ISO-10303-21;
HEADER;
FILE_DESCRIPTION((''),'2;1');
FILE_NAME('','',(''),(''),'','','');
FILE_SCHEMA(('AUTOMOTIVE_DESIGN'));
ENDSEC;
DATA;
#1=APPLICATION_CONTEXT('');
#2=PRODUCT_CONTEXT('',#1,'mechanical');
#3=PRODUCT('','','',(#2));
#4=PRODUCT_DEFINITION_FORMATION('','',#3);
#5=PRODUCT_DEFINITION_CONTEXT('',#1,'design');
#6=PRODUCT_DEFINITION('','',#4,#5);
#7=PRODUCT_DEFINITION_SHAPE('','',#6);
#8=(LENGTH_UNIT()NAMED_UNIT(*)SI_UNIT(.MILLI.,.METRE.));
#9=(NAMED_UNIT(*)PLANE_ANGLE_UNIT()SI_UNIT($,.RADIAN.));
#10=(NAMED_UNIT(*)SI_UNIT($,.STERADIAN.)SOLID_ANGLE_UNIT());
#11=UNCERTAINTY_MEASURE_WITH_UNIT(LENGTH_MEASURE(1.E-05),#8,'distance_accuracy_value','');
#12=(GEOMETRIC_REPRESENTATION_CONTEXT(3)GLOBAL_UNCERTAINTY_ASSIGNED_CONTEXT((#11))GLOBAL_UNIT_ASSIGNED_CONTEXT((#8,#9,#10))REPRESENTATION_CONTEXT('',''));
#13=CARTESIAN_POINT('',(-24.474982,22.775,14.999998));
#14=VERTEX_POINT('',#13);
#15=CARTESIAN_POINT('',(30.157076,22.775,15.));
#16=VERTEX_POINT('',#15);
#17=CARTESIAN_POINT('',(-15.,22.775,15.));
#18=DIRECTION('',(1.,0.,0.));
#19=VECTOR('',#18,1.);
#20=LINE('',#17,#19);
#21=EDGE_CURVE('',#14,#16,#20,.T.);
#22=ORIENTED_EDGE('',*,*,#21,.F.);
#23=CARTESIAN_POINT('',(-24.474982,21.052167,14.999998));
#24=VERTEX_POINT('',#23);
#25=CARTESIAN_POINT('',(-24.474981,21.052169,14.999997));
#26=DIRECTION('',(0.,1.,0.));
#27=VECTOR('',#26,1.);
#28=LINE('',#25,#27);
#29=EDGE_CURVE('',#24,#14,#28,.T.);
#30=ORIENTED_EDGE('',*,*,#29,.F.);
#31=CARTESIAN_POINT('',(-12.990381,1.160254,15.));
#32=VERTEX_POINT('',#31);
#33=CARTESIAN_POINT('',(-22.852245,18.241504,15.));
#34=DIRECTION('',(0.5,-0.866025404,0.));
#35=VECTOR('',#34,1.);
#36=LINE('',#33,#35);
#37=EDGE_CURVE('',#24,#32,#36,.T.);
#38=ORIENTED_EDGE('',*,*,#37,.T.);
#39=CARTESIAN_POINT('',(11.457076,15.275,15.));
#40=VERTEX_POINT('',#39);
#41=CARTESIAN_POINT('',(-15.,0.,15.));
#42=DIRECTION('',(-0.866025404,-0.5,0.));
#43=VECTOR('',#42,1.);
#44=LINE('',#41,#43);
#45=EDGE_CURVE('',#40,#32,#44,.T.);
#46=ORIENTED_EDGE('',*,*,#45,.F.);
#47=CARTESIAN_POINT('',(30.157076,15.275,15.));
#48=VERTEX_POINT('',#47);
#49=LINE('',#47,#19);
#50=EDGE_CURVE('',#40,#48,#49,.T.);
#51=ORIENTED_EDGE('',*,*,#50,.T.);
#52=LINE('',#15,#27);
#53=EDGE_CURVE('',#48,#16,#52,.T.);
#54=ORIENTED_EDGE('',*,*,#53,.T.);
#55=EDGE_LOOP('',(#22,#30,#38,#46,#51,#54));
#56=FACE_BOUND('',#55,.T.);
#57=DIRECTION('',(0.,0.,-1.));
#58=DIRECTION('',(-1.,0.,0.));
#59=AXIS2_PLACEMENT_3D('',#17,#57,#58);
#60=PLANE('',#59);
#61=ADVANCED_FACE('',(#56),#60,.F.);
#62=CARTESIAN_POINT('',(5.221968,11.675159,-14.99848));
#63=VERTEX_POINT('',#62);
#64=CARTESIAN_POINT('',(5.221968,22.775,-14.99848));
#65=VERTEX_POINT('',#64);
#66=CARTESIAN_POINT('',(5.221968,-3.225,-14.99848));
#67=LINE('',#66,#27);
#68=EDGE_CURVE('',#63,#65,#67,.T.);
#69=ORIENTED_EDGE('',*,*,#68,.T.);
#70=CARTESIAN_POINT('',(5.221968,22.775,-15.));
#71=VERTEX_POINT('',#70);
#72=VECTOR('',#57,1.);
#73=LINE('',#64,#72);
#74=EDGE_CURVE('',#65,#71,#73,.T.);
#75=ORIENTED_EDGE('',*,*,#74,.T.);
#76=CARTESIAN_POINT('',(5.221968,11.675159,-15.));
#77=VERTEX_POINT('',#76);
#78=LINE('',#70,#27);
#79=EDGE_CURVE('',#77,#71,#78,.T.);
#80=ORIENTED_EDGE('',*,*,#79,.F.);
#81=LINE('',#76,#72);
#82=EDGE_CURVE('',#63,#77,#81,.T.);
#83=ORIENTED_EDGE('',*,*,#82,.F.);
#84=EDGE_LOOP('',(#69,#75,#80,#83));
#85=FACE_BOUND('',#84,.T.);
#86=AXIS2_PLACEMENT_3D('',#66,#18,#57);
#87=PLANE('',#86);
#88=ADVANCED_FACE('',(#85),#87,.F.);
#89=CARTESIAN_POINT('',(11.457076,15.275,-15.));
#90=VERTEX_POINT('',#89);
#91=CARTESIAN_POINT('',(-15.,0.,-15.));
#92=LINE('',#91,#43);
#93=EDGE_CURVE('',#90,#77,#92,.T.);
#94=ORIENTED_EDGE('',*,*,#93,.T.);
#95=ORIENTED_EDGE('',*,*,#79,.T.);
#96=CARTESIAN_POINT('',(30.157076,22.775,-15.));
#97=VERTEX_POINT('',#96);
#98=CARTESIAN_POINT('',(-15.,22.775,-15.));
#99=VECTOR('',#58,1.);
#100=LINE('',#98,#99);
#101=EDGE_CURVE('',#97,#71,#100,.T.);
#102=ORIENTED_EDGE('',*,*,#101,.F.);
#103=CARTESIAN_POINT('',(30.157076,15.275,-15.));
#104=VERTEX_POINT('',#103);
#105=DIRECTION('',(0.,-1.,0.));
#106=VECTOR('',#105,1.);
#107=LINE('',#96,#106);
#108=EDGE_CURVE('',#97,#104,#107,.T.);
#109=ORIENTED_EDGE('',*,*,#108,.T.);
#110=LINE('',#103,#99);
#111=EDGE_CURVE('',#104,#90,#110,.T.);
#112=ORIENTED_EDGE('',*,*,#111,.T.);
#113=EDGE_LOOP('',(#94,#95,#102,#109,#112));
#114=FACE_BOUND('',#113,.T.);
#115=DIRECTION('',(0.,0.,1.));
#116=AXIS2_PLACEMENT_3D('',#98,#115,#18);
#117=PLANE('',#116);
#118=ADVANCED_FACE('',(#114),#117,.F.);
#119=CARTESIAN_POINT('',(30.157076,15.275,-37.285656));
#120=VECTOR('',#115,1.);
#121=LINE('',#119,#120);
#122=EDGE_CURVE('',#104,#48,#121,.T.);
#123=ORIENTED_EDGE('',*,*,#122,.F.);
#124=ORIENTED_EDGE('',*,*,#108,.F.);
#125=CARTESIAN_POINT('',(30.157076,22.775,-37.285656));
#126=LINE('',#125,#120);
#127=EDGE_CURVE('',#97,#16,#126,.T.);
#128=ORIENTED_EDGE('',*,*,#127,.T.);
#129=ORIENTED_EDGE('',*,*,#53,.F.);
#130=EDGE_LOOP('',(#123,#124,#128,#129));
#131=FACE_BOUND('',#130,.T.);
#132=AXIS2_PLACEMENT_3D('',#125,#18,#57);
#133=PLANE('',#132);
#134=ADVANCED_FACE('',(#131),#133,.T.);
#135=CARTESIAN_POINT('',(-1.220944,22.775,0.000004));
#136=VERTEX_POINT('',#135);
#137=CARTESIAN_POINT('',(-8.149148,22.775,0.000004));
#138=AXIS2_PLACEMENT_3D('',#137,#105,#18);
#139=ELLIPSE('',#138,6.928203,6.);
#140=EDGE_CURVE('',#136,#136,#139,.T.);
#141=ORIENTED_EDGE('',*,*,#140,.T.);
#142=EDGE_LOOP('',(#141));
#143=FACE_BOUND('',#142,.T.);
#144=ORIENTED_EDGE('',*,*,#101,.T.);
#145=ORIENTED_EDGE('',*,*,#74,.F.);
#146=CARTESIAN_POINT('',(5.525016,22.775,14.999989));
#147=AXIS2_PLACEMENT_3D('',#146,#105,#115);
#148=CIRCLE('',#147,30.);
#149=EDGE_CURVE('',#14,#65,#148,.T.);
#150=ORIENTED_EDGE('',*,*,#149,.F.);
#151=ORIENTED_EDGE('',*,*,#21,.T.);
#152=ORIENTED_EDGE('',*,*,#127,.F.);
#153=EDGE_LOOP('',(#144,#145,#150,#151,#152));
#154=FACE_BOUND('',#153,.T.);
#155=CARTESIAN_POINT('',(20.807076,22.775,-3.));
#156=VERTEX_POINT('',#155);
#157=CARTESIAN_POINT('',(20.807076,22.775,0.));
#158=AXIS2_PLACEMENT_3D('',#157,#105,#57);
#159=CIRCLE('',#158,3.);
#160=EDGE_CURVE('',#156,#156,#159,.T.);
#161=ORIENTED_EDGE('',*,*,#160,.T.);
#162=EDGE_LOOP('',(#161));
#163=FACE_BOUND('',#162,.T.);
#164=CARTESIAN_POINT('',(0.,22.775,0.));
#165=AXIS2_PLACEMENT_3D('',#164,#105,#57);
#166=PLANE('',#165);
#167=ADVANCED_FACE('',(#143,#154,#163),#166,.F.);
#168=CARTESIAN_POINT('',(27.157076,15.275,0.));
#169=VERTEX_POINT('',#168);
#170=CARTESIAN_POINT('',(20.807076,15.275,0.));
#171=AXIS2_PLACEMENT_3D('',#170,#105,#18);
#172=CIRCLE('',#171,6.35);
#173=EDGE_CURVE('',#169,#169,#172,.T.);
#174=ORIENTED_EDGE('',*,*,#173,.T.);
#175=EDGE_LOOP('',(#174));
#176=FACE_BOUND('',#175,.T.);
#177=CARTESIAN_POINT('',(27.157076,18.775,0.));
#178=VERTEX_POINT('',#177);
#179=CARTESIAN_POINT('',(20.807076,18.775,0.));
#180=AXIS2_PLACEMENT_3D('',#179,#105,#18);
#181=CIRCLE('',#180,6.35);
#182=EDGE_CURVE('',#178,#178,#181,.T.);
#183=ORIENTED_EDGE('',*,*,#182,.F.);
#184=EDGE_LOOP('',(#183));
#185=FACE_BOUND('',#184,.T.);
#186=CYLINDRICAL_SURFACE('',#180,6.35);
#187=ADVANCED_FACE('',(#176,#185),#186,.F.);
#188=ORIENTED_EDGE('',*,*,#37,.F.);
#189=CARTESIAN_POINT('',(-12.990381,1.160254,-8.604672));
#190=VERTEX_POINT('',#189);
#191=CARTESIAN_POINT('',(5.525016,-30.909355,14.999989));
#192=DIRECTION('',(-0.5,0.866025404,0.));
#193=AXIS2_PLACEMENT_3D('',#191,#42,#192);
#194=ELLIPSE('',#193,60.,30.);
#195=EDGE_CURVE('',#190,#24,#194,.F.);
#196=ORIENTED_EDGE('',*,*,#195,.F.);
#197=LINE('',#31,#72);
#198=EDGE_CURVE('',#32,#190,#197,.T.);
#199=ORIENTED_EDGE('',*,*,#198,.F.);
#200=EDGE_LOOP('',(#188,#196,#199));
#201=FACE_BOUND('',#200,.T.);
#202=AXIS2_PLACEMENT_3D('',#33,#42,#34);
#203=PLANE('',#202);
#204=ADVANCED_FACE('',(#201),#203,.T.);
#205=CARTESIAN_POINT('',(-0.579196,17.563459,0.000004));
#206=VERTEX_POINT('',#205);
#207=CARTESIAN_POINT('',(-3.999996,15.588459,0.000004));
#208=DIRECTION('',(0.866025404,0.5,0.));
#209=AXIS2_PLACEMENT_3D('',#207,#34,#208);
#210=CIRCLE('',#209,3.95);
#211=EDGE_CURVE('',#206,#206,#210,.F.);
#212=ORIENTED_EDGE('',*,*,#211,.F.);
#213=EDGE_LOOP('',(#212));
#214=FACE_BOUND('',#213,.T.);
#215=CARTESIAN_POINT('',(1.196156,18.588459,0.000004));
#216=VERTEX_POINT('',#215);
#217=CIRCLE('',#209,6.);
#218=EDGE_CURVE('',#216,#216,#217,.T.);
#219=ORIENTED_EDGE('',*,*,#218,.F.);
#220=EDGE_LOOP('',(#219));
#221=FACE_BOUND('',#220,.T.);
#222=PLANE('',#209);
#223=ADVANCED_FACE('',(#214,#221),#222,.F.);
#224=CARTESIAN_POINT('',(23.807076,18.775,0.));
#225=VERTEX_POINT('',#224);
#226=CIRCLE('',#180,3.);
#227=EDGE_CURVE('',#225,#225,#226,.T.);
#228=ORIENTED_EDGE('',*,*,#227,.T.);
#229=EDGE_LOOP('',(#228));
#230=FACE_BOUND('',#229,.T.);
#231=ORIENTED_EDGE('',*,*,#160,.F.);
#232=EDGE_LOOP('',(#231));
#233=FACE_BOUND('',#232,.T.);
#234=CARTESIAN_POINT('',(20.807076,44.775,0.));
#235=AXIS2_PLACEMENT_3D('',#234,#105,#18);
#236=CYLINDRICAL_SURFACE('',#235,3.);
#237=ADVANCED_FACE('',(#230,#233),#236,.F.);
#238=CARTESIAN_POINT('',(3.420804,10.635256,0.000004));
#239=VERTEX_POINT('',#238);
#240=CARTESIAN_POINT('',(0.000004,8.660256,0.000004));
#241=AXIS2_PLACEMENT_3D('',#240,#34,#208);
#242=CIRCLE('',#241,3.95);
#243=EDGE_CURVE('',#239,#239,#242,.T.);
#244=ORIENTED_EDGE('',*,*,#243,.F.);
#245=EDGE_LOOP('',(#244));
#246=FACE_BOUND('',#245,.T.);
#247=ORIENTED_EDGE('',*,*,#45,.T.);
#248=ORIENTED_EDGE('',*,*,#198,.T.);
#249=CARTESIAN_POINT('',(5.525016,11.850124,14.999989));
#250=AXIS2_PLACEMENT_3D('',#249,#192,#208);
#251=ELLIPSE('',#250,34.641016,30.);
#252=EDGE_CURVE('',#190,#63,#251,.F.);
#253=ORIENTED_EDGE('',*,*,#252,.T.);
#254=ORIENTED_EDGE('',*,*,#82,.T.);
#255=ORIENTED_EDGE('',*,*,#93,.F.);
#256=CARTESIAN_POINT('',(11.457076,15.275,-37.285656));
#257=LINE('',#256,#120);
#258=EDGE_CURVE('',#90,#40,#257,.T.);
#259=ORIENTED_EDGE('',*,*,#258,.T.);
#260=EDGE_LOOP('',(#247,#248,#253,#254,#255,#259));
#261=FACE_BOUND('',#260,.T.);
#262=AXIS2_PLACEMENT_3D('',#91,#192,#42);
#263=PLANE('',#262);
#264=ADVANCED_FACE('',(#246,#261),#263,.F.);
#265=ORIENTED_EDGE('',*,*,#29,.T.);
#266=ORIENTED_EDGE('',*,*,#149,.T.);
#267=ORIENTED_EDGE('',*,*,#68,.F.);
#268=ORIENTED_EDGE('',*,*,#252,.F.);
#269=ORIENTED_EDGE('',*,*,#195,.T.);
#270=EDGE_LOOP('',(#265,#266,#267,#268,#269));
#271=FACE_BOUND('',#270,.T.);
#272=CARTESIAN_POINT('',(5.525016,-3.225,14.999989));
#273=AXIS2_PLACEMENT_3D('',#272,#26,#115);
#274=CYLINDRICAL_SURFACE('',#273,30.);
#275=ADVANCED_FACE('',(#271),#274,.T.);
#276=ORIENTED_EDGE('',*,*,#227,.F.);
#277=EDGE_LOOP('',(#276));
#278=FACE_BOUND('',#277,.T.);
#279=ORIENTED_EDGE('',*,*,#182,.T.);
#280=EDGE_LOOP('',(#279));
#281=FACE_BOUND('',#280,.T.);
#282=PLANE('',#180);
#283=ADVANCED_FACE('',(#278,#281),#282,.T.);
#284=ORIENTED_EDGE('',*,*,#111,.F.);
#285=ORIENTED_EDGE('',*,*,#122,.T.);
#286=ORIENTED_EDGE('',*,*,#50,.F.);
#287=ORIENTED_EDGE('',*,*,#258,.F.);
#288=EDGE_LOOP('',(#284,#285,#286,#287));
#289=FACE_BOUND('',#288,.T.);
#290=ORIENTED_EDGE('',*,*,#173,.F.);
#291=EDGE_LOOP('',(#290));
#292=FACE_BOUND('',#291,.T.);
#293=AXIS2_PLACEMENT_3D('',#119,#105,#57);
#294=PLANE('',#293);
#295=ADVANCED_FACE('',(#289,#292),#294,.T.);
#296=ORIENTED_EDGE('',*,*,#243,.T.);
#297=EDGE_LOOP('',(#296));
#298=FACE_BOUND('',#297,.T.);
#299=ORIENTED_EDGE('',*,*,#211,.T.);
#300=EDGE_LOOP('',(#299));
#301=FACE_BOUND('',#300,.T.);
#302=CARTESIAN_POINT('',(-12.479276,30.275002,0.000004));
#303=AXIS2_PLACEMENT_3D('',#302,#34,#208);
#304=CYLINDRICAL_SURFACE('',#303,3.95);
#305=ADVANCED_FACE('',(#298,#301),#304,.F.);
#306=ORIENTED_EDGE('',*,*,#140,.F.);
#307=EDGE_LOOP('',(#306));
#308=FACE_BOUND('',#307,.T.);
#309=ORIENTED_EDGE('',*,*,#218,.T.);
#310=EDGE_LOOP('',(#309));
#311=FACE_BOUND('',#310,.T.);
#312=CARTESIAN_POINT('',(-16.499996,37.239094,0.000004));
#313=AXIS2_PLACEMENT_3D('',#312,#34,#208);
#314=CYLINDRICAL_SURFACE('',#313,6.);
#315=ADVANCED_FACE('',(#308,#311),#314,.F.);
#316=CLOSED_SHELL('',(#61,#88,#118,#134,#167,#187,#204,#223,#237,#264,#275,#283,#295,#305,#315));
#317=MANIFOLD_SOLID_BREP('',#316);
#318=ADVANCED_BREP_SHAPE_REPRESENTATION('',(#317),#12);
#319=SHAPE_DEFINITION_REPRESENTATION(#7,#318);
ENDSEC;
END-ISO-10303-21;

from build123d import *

# Parameters (mm, degrees)
ESBO_O1_W                = 30
ESBO_O1_H                = 30
RESSALTO_EXTRUS_O1_DEPTH = 22.775
CORTE_EXTRUS_O1_DEPTH    = 41.542577927
ESBO_O3_OUTSIDE_W        = 48.998
ESBO_O3_OUTSIDE_H        = 41.63
ESBO_O3_OUTSIDE_W_2      = 30
ESBO_O3_OUTSIDE_H_2      = 30
CORTE_EXTRUS_O2_DEPTH    = 30.010251575
RESSALTO_EXTRUS_O2_DEPTH = 30
ESBO_O5_R                = 3.95
CORTE_EXTRUS_O3_DEPTH    = 32.012511133
CORTE_EXTRUS_O5_START    = -8
ESBO_O8_R                = 6
CORTE_EXTRUS_O5_DEPTH    = 25
RESSALTO_EXTRUS_O6_DEPTH = 30
CORTE_EXTRUS_O11_START   = -21.614745962
CORTE_EXTRUS_O11_DEPTH   = 21.614745962
ESBO_O19_R               = 6.35
CORTE_EXTRUS_O12_DEPTH   = 3.5
ESBO_O20_R               = 3
CORTE_EXTRUS_O13_DEPTH   = 26


with BuildPart() as part:
    # Esboço1 → Ressalto-extrusão1 (new body)
    with BuildSketch(Plane(origin=(0, 0, 0), x_dir=(1, 0, 0), z_dir=(0, 1, 0))):
        Rectangle(ESBO_O1_W, ESBO_O1_H)
    extrude(amount=RESSALTO_EXTRUS_O1_DEPTH)

    # Esboço2 → Corte-extrusão1 (cut, through all)
    with BuildSketch(Plane.XY.offset(15)):
        Polygon((-15, 0), (15, 17.320508076), (15, 0), align=None)
    extrude(amount=-CORTE_EXTRUS_O1_DEPTH, mode=Mode.SUBTRACT)

    # Esboço3 outside → Corte-extrusão2 (cut, through all)
    with BuildSketch(Plane(origin=(-3.75, 6.495190528, 0), x_dir=(0.8660254037844378, 0.5000000000000017, 0), z_dir=(0.5000000000000016, -0.8660254037844377, 0))):
        with Locations((5.694, 0)):
            Rectangle(ESBO_O3_OUTSIDE_W, ESBO_O3_OUTSIDE_H)
        with Locations((4.330127019, 0)):
            Rectangle(ESBO_O3_OUTSIDE_W_2, ESBO_O3_OUTSIDE_H_2, mode=Mode.SUBTRACT)
    extrude(amount=-CORTE_EXTRUS_O2_DEPTH, mode=Mode.SUBTRACT)

    # Esboço4 → Ressalto-extrusão2 (add)
    with BuildSketch(Plane.XY.offset(15)):
        Polygon((-25.469660456, 22.775), (-15, 4.641016151), (-15, 22.775), align=None)
    extrude(amount=-RESSALTO_EXTRUS_O2_DEPTH)

    # Esboço5 → Corte-extrusão3 (cut, through all)
    with BuildSketch(Plane(origin=(-3.75, 6.495190528, 0), x_dir=(-0.8660254037844379, -0.5000000000000013, 0), z_dir=(0.5000000000000013, -0.8660254037844379, 0))):
        with Locations(Location((-4.330131096, -4.077e-06, 0), (0, 0, 180))):
            Circle(ESBO_O5_R)
    extrude(amount=-CORTE_EXTRUS_O3_DEPTH, mode=Mode.SUBTRACT)

    # Esboço8 → Corte-extrusão5 (cut)
    with BuildSketch(Plane(origin=(-3.75, 6.495190528, 0), x_dir=(0.8660254037844379, 0.5000000000000013, 0), z_dir=(0.5000000000000013, -0.8660254037844379, 0)).offset(CORTE_EXTRUS_O5_START)):
        with Locations((4.330131096, 4.077e-06)):
            Circle(ESBO_O8_R)
    extrude(amount=-CORTE_EXTRUS_O5_DEPTH, mode=Mode.SUBTRACT)

    # Esboço16 → Ressalto-extrusão6 (add)
    with BuildSketch(Plane.XY.offset(15)):
        Polygon((9.171355695, 22.775), (30.157076086, 22.775), (30.157076086, 15.275), (11.457076086, 15.275), align=None)
    extrude(amount=-RESSALTO_EXTRUS_O6_DEPTH)

    # Corte-extrusão11: read off the stored shape, not the designer's step
    # Corte-extrusão11 outline → Corte-extrusão11 (cut)
    with BuildSketch(Plane(origin=(0, 22.775, 0), x_dir=(1, 0, 0), z_dir=(0, 1, 0)).offset(CORTE_EXTRUS_O11_START)):
        with BuildLine():
            ThreePointArc((-24.474983506, -14.999998017), (-15.795064462, 6.105795279), (5.221968287, 14.998479898))
            Line((5.221968287, 14.998479898), (5.221968287, 15))
            Line((5.221968287, 15), (-26, 15))
            Line((-26, 15), (-26, -16))
            Line((-26, -16), (-24.47498322, -16))
            Line((-24.47498322, -16), (-24.474983506, -14.999998017))
        make_face()
    extrude(amount=CORTE_EXTRUS_O11_DEPTH, mode=Mode.SUBTRACT)

    # Esboço19 → Corte-extrusão12 (cut)
    with BuildSketch(Plane.XZ.offset(-15.275)):
        with Locations((20.807076086, 0)):
            Circle(ESBO_O19_R)
    extrude(amount=-CORTE_EXTRUS_O12_DEPTH, mode=Mode.SUBTRACT)

    # Esboço20 → Corte-extrusão13 (cut)
    with BuildSketch(Plane.XZ.offset(-18.775)):
        with Locations((20.807076086, 0)):
            Circle(ESBO_O20_R)
    extrude(amount=-CORTE_EXTRUS_O13_DEPTH, mode=Mode.SUBTRACT)


solid = part.part
